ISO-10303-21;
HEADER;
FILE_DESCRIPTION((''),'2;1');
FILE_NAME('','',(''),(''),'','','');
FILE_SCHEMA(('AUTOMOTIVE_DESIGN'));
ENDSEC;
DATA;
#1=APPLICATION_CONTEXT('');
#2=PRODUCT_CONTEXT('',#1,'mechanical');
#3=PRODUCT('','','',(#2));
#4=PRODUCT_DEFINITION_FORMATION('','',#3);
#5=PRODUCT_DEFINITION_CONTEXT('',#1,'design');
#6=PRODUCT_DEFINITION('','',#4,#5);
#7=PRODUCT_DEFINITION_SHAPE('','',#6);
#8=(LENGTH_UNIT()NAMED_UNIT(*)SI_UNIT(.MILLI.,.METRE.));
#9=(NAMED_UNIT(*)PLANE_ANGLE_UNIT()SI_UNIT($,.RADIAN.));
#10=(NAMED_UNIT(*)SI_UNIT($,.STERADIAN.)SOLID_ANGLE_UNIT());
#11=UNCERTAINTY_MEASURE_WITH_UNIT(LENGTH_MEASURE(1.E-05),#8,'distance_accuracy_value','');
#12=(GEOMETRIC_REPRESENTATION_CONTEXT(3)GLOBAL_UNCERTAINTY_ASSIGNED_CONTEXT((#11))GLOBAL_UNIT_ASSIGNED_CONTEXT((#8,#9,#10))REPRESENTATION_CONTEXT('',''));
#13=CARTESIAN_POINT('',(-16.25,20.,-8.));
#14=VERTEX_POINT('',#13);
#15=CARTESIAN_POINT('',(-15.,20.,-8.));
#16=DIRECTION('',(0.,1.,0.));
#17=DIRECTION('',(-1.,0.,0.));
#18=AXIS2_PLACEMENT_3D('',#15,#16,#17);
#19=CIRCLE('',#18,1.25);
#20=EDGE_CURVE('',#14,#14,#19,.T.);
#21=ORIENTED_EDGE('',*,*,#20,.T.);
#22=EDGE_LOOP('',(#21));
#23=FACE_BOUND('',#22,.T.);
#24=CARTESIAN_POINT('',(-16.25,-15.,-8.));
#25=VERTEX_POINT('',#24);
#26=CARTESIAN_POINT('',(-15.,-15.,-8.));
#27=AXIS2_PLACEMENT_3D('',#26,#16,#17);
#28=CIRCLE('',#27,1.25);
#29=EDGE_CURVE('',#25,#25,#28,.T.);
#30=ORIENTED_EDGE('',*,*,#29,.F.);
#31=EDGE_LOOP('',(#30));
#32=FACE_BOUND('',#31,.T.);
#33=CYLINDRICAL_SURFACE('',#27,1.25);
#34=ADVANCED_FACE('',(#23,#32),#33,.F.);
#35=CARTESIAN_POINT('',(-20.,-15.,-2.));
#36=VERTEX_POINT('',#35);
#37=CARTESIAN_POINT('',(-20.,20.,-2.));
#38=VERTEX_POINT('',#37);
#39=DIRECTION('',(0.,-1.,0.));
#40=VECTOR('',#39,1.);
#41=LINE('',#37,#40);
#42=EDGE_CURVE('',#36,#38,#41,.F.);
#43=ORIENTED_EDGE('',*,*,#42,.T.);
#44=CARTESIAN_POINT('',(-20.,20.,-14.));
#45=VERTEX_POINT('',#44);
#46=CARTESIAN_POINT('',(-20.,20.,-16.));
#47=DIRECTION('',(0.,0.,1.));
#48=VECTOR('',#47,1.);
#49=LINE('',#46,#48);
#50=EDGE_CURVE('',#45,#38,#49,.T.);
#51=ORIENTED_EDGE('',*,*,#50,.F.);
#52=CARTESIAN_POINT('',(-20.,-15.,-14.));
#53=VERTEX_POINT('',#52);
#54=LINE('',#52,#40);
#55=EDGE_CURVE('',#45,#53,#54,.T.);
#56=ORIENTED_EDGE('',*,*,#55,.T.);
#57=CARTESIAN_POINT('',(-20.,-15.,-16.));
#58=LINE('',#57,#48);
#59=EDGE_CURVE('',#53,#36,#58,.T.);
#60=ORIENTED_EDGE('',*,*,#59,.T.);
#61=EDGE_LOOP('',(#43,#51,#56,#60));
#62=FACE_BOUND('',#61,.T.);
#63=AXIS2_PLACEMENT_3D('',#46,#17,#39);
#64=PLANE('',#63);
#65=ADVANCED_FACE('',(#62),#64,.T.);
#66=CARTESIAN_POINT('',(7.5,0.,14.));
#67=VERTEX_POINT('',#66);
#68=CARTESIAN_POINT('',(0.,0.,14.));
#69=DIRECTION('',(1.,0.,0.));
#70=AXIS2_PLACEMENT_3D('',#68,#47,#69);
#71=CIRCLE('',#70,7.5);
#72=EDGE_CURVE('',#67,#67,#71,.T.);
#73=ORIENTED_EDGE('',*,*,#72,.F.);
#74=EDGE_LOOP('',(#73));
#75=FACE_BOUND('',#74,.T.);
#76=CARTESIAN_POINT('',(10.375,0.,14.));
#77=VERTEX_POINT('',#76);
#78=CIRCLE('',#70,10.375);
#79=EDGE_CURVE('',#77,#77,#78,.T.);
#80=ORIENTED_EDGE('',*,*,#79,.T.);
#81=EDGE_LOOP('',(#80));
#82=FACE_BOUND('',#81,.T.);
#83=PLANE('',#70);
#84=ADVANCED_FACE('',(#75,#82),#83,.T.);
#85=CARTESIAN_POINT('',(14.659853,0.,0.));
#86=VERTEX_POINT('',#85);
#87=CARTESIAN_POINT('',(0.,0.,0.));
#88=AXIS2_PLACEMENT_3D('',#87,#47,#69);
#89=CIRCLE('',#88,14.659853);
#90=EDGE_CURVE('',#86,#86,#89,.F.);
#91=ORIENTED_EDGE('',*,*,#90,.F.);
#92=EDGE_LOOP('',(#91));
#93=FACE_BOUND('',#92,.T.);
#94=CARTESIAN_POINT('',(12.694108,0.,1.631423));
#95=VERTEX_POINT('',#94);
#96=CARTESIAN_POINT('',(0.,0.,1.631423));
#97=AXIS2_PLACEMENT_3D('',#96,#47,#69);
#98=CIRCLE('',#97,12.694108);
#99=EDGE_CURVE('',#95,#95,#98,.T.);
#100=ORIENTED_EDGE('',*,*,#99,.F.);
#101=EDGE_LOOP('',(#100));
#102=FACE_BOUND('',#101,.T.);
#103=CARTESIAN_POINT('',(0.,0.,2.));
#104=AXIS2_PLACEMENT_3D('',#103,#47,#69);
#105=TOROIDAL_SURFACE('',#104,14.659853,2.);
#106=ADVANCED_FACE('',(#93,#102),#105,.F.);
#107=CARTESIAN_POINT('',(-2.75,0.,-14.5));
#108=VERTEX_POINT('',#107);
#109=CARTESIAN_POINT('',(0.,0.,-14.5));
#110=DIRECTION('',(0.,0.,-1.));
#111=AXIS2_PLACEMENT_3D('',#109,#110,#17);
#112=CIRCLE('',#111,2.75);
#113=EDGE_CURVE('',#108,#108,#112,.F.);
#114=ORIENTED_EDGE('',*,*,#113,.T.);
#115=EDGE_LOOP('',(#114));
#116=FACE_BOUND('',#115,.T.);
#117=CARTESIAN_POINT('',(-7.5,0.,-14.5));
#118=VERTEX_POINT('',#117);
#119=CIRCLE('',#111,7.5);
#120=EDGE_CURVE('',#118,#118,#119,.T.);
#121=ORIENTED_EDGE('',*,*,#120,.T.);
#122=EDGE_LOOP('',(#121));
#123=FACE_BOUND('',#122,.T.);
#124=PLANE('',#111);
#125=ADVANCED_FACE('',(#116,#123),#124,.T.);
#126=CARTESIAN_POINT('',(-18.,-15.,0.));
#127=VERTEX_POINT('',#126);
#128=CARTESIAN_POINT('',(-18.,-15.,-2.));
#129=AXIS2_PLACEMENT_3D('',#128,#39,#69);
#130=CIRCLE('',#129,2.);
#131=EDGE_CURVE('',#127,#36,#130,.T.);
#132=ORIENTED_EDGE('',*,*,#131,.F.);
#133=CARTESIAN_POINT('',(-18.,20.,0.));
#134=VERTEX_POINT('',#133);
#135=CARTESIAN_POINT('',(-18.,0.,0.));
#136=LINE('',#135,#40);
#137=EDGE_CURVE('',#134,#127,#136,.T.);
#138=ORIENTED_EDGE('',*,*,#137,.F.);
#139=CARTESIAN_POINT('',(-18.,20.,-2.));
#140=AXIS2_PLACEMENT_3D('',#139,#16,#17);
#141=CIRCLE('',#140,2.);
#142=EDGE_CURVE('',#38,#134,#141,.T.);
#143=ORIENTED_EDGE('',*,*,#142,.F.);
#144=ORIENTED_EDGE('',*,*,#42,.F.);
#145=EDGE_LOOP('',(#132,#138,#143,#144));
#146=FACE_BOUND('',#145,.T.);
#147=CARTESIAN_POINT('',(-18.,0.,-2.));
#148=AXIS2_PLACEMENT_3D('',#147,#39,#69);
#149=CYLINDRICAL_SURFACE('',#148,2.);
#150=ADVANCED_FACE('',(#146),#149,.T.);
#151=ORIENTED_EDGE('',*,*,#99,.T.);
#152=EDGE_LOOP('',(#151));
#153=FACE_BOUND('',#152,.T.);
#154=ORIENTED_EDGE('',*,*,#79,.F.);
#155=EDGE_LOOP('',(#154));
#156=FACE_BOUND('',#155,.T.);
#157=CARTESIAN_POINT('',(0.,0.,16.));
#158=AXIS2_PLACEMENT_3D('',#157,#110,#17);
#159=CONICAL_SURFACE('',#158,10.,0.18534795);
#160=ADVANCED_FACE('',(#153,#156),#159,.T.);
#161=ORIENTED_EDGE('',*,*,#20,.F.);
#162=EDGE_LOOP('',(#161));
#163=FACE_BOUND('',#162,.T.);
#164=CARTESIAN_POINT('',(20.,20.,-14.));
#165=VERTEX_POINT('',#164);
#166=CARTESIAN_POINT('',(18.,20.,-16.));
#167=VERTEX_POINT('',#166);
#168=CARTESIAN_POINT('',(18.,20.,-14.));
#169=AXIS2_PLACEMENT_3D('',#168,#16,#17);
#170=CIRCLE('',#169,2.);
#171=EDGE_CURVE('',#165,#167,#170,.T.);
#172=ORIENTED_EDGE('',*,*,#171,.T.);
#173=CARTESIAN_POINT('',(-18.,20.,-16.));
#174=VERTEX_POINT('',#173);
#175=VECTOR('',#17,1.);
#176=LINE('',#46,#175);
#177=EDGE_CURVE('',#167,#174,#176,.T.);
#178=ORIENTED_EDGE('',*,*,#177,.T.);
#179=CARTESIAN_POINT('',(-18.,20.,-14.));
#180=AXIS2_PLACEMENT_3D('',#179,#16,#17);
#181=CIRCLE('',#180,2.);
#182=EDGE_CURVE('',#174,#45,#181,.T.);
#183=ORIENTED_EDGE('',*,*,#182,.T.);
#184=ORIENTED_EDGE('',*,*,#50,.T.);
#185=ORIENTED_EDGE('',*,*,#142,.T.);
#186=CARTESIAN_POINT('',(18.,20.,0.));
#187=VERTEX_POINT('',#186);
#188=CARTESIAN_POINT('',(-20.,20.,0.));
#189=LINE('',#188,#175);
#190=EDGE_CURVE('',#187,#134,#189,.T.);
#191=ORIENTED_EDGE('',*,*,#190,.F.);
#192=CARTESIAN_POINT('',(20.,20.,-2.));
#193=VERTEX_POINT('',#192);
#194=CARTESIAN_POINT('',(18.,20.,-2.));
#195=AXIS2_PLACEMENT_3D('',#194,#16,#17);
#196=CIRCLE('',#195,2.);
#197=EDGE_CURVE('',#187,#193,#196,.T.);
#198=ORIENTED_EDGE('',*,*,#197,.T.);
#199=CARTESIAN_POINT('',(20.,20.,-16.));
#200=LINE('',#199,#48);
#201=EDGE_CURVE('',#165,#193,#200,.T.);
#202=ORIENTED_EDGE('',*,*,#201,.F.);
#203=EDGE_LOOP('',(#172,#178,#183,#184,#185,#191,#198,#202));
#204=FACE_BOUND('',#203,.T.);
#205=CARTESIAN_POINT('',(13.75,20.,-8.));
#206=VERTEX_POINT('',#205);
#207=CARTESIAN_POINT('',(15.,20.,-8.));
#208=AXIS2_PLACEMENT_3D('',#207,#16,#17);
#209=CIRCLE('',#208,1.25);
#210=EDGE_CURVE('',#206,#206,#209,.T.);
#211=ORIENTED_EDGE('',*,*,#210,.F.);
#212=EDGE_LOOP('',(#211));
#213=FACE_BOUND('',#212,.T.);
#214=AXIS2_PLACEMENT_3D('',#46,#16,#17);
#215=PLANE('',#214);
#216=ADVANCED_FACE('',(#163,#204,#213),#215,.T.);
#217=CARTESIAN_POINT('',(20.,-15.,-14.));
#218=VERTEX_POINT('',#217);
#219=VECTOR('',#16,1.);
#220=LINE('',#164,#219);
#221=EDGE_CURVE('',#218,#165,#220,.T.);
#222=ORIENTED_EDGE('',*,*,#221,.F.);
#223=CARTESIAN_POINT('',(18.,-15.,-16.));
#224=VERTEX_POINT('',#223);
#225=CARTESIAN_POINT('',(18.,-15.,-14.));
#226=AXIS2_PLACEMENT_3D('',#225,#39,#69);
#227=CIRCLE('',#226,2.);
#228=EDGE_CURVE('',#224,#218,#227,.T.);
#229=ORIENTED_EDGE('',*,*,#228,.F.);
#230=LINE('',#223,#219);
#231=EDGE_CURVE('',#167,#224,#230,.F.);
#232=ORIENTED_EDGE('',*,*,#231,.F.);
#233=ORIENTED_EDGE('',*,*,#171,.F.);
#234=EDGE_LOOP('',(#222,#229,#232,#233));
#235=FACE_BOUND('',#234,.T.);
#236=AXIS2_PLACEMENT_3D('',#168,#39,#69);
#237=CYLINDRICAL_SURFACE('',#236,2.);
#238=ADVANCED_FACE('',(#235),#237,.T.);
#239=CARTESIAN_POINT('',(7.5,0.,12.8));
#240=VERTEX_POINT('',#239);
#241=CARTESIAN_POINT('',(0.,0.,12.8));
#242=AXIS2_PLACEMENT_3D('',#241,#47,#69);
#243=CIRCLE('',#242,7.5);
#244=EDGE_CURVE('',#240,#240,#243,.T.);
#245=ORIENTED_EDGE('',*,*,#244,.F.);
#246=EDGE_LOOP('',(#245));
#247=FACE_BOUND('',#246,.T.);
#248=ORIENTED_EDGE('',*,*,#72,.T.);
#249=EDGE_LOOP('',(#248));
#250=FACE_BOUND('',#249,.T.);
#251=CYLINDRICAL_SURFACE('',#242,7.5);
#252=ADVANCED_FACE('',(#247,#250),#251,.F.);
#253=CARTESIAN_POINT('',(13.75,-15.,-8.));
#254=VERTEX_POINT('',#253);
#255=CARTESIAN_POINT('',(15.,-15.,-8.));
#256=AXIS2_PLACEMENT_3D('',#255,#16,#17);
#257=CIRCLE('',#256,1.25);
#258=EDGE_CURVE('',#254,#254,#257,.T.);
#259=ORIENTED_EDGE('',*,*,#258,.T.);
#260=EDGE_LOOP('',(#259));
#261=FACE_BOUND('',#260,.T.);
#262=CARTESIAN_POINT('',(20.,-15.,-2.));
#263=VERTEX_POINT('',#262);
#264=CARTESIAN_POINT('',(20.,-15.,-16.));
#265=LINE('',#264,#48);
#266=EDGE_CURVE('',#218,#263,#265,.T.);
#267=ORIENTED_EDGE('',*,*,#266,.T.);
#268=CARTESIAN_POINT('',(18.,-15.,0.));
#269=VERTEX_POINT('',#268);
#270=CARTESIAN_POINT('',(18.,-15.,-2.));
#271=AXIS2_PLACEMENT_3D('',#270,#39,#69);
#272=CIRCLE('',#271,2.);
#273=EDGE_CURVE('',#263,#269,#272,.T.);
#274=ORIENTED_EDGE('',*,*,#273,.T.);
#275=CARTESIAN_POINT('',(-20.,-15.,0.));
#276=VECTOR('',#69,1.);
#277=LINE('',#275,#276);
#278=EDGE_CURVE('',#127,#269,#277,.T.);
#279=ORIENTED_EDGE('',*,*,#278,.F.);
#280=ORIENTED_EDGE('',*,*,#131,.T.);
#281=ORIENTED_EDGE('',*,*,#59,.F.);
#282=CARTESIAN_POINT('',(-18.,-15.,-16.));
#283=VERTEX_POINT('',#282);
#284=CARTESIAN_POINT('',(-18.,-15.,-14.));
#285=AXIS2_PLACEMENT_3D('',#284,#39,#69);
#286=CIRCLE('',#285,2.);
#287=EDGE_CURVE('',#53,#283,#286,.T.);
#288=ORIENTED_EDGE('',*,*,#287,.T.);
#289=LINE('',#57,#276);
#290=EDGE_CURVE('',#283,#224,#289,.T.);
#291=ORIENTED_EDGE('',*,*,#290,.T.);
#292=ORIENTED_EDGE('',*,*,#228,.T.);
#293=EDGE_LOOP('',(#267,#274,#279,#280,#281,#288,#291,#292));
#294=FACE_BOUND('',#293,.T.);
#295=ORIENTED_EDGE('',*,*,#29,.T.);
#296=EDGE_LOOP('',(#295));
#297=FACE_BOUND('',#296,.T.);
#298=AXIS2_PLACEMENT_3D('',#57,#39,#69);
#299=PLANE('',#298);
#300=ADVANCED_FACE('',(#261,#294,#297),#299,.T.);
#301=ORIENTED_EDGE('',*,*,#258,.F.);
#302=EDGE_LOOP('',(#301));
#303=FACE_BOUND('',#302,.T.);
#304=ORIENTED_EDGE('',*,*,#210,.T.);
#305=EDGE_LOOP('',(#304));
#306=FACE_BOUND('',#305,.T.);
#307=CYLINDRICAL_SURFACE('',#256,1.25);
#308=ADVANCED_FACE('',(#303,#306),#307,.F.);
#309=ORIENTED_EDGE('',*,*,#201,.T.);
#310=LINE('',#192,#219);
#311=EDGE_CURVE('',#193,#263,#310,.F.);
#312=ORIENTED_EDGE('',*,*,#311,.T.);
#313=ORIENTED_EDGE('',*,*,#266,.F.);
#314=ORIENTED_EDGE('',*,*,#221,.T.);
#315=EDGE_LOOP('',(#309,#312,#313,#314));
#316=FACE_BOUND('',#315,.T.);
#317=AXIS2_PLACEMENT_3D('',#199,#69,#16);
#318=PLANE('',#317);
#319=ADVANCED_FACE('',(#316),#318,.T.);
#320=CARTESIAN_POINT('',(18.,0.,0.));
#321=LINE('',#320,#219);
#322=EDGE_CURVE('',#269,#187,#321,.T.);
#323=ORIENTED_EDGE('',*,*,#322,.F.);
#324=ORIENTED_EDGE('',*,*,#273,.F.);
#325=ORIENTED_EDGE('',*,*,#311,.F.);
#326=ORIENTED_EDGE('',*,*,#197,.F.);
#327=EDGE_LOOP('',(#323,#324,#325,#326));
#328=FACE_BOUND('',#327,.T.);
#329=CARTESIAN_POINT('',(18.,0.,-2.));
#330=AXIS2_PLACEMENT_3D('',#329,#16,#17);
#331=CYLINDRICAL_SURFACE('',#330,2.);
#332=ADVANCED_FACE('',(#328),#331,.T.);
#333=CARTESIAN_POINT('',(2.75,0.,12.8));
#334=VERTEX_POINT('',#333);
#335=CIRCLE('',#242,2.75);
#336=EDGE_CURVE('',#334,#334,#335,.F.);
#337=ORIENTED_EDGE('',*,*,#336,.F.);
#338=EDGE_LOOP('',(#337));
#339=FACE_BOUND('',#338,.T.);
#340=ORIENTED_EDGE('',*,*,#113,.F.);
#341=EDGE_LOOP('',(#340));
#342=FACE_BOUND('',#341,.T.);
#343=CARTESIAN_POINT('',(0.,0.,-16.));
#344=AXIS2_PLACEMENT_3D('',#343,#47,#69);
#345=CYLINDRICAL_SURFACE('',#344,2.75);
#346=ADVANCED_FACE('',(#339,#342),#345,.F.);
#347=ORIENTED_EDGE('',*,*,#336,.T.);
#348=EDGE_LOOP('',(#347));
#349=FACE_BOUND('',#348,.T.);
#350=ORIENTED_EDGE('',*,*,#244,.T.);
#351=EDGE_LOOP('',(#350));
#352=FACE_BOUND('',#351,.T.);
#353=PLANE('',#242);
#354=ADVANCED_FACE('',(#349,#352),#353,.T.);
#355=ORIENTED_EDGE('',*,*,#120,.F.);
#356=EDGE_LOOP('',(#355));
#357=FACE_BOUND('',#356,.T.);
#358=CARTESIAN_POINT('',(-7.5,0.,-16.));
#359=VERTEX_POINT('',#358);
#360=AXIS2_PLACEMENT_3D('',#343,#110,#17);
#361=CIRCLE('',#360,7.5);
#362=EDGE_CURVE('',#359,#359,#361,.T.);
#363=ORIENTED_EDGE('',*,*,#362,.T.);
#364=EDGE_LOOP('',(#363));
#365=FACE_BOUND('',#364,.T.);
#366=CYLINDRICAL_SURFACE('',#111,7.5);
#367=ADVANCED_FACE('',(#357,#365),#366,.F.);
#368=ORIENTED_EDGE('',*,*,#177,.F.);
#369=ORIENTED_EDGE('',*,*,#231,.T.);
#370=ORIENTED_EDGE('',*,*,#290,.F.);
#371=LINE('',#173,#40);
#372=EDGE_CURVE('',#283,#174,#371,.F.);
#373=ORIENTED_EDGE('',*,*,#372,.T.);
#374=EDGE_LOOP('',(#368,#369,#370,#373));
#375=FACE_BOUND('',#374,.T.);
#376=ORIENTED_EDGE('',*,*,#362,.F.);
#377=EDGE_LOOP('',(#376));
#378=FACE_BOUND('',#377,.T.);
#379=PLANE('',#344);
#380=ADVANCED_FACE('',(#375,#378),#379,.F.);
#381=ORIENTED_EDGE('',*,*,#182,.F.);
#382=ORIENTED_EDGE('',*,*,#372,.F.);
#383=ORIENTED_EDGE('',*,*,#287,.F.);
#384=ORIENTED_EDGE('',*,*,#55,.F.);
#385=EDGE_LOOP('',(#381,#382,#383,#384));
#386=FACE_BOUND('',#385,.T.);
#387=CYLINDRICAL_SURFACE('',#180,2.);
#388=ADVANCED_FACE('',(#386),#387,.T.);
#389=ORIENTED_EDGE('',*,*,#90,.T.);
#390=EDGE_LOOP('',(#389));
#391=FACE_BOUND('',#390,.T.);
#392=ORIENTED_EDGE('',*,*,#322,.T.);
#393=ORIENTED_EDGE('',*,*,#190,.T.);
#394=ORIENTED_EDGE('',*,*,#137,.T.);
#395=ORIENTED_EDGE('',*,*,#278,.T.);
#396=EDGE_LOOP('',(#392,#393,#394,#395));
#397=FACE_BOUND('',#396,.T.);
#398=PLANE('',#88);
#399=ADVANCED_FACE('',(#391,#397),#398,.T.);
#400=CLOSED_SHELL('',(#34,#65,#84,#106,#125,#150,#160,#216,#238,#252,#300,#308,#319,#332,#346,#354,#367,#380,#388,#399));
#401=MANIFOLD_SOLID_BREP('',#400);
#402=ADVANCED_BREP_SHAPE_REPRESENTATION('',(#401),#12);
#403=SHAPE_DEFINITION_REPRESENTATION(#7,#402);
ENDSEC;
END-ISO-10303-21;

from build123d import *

# Parameters (mm, degrees)
SKETCH_1_W             = 40
SKETCH_1_H             = 35
EXTRUDE_457_DEPTH      = 16
SKETCH_2_R             = 10
EXTRUDE_593_DEPTH      = 14
SKETCH_4_R             = 2.75
CUT_EXTRUDE_684_DEPTH  = 42.231056256
CHAMFER_2_SIZE         = 3
CHAMFER_2_SIZE_2       = 16
FILLET_5_R             = 2
SKETCH_7_R             = 1.25
CUT_EXTRUDE_1001_DEPTH = 44.370496884
FILLET_7_R             = 2
SKETCH_8_R             = 7.5
CUT_EXTRUDE_1355_DEPTH = 1.2
CUT_EXTRUDE_START      = -1.5
SKETCH_9_R             = 7.5
CUT_EXTRUDE_1489_DEPTH = 1.5


with BuildPart() as part:
    # Эскиз1 → Extrude 457 (new body)
    with BuildSketch(Plane.XY):
        with Locations((0, 2.5)):
            Rectangle(SKETCH_1_W, SKETCH_1_H)
    extrude(amount=-EXTRUDE_457_DEPTH)

    # Эскиз2 → Extrude 593 (add)
    with BuildSketch(Plane.XY):
        Circle(SKETCH_2_R)
    extrude(amount=EXTRUDE_593_DEPTH)

    # Эскиз4 → Cut-Extrude 684 (cut, through all)
    with BuildSketch(Plane.XY.offset(14)):
        Circle(SKETCH_4_R)
    extrude(amount=-CUT_EXTRUDE_684_DEPTH, mode=Mode.SUBTRACT)

    # Фаска2
    # the kernel refuses this chamfer: 16, 3 mm, written as the material it adds along each edge
    with BuildSketch(Plane(origin=(0, 0, 0), x_dir=(1, 0, 0), z_dir=(0, -1, 0))) as chamfer_2_piece_1_section:
        Polygon((10 + CHAMFER_2_SIZE, 0), (10, CHAMFER_2_SIZE_2), (10, 0), align=None)
    chamfer_2_piece_1 = revolve(axis=Axis((0, 0, 0), (0, 0, 1)), mode=Mode.PRIVATE)
    chamfer_2_piece_1 = split(chamfer_2_piece_1, bisect_by=Plane(origin=(-11.622307858, 0, 14), z_dir=(0, 0, -1)), keep=Keep.TOP, mode=Mode.PRIVATE)
    add(chamfer_2_piece_1)

    # Скругление5
    fillet_5_edges = [part.edges().sort_by_distance(p)[0] for p in [
        (-13, 0, 0),
    ]]
    fillet(fillet_5_edges, radius=FILLET_5_R)

    # Эскиз7 → Cut-Extrude 1001 (cut, through all)
    with BuildSketch(Plane(origin=(0, 20, 0), x_dir=(1, 0, 0), z_dir=(0, 1, 0))):
        with Locations(Location((-15, 8, 0), (0, 0, 180))):
            Circle(SKETCH_7_R)
        with Locations(Location((15, 8, 0), (0, 0, 180))):
            Circle(SKETCH_7_R)
    extrude(amount=-CUT_EXTRUDE_1001_DEPTH, mode=Mode.SUBTRACT)

    # Скругление7
    fillet_7_edges = [part.edges().sort_by_distance(p)[0] for p in [
        (20, 2.5, -16),
        (-20, 2.5, -16),
        (20, 2.5, 0),
        (-20, 2.5, 0),
    ]]
    fillet(fillet_7_edges, radius=FILLET_7_R)

    # Эскиз8 → Cut-Extrude 1355 (cut)
    with BuildSketch(Plane.XY.offset(14)):
        Circle(SKETCH_8_R)
    extrude(amount=-CUT_EXTRUDE_1355_DEPTH, mode=Mode.SUBTRACT)

    # Эскиз9 → Cut-Extrude 1489 (cut)
    with BuildSketch(Plane(origin=(0, 0, -16), x_dir=(-1, 0, 0), z_dir=(0, 0, -1)).offset(CUT_EXTRUDE_START)):
        with Locations(Location((0, 0, 0), (0, 0, 180))):
            Circle(SKETCH_9_R)
    extrude(amount=CUT_EXTRUDE_1489_DEPTH, mode=Mode.SUBTRACT)


solid = part.part
